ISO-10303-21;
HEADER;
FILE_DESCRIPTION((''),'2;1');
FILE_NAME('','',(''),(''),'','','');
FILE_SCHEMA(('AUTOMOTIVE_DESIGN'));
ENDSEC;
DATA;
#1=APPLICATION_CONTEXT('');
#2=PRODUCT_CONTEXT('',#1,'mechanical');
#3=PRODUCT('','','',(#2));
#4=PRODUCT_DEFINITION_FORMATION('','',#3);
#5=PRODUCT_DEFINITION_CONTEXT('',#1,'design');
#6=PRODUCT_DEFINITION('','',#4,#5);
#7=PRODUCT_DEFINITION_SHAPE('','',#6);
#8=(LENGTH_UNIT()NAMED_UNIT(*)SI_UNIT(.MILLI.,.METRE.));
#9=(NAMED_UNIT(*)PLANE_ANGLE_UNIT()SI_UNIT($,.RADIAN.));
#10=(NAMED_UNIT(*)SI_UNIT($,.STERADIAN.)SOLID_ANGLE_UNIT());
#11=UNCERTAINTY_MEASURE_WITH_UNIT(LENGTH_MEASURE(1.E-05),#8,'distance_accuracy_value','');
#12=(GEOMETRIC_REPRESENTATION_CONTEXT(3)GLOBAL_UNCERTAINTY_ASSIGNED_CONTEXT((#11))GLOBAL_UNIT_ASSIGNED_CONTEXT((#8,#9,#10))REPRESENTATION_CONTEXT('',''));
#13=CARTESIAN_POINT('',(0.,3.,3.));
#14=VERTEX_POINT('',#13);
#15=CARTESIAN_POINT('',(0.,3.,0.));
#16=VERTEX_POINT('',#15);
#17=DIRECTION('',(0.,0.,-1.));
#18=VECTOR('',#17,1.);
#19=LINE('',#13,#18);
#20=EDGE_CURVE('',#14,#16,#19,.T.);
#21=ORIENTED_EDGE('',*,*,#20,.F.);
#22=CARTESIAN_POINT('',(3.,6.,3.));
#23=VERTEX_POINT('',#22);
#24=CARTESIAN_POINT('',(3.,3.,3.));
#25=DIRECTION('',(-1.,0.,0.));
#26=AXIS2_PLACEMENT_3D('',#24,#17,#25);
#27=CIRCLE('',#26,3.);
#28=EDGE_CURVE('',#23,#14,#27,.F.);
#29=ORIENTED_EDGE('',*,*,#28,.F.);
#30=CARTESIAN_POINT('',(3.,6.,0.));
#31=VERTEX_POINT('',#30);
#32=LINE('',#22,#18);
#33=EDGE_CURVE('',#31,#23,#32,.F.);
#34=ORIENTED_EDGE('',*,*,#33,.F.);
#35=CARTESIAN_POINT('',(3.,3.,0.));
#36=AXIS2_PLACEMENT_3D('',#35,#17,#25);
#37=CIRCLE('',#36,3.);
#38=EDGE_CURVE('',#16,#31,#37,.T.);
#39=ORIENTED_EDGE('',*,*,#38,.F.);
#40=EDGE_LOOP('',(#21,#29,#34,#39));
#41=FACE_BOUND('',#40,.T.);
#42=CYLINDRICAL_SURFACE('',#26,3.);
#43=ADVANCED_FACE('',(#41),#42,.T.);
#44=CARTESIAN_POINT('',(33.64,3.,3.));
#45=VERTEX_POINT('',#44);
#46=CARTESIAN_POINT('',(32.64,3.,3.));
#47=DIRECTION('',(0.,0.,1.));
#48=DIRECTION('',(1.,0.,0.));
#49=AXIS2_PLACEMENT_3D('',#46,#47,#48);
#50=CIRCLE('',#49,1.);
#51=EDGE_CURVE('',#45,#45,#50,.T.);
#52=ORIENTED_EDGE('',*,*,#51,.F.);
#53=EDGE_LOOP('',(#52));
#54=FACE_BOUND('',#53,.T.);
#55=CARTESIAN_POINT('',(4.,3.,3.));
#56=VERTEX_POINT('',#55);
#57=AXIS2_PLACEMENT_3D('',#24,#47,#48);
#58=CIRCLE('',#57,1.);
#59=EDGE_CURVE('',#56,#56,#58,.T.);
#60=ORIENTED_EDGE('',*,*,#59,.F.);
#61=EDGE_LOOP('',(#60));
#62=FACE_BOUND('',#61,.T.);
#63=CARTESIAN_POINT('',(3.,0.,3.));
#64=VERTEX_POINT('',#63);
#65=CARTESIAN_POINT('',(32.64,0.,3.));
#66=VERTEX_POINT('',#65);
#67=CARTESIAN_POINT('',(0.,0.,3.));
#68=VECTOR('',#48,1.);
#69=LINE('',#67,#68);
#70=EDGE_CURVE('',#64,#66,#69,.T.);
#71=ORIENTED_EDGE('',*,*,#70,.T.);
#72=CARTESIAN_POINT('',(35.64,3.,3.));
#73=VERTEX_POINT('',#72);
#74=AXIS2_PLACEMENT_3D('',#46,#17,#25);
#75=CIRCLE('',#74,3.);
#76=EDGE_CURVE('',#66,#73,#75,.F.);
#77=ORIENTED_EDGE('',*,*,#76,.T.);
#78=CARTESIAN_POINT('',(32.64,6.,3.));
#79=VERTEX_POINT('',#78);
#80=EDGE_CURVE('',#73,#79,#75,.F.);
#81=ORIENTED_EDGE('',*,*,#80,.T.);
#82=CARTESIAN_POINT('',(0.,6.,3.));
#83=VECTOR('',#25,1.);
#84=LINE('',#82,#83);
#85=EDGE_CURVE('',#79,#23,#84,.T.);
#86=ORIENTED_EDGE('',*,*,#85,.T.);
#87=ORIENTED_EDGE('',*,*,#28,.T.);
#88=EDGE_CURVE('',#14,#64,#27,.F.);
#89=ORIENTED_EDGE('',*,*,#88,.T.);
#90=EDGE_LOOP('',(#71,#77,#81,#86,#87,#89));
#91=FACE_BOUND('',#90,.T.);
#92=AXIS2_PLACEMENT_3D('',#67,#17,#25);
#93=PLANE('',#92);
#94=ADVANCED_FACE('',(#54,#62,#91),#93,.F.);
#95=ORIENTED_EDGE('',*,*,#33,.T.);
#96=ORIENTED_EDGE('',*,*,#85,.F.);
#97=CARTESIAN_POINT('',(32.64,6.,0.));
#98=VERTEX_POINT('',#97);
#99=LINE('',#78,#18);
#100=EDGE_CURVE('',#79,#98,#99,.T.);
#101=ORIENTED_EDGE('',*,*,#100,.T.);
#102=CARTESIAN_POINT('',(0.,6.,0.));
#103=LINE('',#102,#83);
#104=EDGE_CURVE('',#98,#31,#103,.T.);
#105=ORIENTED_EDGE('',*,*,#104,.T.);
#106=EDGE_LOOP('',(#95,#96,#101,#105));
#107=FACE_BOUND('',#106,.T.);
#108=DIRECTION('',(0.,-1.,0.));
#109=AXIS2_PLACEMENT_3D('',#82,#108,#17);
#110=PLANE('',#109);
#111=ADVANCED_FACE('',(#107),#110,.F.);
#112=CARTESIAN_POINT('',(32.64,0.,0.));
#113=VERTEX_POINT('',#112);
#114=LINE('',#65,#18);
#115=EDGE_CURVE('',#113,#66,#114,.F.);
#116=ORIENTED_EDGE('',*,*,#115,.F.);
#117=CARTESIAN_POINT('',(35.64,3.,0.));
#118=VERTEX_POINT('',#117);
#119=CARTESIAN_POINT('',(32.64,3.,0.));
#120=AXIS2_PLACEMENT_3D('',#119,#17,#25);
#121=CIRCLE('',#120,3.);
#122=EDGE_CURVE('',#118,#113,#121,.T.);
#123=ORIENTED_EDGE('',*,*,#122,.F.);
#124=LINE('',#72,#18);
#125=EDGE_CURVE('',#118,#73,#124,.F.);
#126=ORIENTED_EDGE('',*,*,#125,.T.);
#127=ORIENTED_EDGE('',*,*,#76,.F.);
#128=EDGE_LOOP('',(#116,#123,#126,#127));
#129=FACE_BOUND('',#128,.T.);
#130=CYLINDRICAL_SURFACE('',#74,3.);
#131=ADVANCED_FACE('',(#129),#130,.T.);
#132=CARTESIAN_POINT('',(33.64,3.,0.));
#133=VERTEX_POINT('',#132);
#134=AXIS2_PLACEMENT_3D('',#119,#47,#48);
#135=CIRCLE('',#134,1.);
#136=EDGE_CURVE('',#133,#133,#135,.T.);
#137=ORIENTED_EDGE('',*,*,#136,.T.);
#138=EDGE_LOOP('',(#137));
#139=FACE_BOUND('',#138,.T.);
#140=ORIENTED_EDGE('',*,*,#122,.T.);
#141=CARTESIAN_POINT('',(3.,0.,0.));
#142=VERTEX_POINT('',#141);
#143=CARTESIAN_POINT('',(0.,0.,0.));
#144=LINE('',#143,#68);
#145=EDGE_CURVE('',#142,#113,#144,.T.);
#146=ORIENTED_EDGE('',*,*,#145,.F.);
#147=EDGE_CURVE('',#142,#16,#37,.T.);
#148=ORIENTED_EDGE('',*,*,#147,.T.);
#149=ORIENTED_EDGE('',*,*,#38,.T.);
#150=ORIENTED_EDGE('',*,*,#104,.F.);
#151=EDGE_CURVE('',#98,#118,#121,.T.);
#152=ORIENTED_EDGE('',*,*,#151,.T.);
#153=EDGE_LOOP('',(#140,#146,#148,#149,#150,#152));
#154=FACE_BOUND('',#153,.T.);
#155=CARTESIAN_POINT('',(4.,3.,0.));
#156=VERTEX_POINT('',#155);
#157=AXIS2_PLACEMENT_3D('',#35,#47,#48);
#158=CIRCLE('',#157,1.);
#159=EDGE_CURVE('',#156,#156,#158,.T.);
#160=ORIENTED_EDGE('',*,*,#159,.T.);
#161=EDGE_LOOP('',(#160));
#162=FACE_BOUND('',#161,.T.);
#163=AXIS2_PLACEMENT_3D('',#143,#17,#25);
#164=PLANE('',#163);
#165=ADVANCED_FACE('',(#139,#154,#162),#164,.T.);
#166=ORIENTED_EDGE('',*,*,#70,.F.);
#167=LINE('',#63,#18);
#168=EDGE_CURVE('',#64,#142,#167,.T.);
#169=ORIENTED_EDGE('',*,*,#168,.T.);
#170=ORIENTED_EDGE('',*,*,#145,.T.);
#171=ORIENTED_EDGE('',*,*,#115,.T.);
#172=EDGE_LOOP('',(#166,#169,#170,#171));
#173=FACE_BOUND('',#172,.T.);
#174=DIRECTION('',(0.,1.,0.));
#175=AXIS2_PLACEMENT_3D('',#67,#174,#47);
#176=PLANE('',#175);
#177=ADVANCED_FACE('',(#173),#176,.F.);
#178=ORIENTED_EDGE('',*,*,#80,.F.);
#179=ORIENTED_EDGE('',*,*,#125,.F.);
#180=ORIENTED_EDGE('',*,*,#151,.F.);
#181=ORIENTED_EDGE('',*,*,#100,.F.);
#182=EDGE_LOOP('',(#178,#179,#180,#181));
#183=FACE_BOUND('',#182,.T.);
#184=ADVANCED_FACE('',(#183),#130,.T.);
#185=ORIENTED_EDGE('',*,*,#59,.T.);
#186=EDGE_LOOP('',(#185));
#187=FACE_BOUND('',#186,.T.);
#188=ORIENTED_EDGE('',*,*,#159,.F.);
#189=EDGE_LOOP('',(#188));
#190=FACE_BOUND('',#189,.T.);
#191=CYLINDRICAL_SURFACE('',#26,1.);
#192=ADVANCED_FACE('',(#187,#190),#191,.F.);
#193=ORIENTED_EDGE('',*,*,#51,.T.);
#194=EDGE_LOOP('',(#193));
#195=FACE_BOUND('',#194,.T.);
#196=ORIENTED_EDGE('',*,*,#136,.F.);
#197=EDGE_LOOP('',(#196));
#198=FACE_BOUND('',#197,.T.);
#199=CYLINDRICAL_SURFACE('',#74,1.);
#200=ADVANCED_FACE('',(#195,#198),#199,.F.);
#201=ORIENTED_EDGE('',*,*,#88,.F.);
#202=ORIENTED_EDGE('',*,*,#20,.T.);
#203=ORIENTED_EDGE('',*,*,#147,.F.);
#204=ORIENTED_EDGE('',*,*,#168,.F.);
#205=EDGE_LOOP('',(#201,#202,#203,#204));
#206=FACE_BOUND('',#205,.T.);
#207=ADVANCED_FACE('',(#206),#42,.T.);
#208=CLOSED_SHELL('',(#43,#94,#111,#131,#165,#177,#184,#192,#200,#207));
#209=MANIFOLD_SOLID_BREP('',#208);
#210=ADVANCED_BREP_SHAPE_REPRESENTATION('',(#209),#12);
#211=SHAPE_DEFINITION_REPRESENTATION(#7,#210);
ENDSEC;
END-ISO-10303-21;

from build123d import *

# Parameters (mm, degrees)
SKETCH1_W           = 35.64
SKETCH1_H           = 6
SKETCH1_R           = 1
BOSS_EXTRUDE1_DEPTH = 3
FILLET1_R           = 3


with BuildPart() as part:
    # Sketch1 → Boss-Extrude1 (new body)
    with BuildSketch(Plane.XY):
        with Locations((17.82, 3)):
            Rectangle(SKETCH1_W, SKETCH1_H)
        with Locations((3, 3)):
            Circle(SKETCH1_R, mode=Mode.SUBTRACT)
        with Locations((32.64, 3)):
            Circle(SKETCH1_R, mode=Mode.SUBTRACT)
    extrude(amount=BOSS_EXTRUDE1_DEPTH)

    # Fillet1
    fillet1_edges = [part.edges().sort_by_distance(p)[0] for p in [
        (35.64, 0, 1.5),
        (35.64, 6, 1.5),
        (0, 0, 1.5),
        (0, 6, 1.5),
    ]]
    fillet(fillet1_edges, radius=FILLET1_R - 0.0001)  # a hair under: the kernel refuses the full size


solid = part.part
